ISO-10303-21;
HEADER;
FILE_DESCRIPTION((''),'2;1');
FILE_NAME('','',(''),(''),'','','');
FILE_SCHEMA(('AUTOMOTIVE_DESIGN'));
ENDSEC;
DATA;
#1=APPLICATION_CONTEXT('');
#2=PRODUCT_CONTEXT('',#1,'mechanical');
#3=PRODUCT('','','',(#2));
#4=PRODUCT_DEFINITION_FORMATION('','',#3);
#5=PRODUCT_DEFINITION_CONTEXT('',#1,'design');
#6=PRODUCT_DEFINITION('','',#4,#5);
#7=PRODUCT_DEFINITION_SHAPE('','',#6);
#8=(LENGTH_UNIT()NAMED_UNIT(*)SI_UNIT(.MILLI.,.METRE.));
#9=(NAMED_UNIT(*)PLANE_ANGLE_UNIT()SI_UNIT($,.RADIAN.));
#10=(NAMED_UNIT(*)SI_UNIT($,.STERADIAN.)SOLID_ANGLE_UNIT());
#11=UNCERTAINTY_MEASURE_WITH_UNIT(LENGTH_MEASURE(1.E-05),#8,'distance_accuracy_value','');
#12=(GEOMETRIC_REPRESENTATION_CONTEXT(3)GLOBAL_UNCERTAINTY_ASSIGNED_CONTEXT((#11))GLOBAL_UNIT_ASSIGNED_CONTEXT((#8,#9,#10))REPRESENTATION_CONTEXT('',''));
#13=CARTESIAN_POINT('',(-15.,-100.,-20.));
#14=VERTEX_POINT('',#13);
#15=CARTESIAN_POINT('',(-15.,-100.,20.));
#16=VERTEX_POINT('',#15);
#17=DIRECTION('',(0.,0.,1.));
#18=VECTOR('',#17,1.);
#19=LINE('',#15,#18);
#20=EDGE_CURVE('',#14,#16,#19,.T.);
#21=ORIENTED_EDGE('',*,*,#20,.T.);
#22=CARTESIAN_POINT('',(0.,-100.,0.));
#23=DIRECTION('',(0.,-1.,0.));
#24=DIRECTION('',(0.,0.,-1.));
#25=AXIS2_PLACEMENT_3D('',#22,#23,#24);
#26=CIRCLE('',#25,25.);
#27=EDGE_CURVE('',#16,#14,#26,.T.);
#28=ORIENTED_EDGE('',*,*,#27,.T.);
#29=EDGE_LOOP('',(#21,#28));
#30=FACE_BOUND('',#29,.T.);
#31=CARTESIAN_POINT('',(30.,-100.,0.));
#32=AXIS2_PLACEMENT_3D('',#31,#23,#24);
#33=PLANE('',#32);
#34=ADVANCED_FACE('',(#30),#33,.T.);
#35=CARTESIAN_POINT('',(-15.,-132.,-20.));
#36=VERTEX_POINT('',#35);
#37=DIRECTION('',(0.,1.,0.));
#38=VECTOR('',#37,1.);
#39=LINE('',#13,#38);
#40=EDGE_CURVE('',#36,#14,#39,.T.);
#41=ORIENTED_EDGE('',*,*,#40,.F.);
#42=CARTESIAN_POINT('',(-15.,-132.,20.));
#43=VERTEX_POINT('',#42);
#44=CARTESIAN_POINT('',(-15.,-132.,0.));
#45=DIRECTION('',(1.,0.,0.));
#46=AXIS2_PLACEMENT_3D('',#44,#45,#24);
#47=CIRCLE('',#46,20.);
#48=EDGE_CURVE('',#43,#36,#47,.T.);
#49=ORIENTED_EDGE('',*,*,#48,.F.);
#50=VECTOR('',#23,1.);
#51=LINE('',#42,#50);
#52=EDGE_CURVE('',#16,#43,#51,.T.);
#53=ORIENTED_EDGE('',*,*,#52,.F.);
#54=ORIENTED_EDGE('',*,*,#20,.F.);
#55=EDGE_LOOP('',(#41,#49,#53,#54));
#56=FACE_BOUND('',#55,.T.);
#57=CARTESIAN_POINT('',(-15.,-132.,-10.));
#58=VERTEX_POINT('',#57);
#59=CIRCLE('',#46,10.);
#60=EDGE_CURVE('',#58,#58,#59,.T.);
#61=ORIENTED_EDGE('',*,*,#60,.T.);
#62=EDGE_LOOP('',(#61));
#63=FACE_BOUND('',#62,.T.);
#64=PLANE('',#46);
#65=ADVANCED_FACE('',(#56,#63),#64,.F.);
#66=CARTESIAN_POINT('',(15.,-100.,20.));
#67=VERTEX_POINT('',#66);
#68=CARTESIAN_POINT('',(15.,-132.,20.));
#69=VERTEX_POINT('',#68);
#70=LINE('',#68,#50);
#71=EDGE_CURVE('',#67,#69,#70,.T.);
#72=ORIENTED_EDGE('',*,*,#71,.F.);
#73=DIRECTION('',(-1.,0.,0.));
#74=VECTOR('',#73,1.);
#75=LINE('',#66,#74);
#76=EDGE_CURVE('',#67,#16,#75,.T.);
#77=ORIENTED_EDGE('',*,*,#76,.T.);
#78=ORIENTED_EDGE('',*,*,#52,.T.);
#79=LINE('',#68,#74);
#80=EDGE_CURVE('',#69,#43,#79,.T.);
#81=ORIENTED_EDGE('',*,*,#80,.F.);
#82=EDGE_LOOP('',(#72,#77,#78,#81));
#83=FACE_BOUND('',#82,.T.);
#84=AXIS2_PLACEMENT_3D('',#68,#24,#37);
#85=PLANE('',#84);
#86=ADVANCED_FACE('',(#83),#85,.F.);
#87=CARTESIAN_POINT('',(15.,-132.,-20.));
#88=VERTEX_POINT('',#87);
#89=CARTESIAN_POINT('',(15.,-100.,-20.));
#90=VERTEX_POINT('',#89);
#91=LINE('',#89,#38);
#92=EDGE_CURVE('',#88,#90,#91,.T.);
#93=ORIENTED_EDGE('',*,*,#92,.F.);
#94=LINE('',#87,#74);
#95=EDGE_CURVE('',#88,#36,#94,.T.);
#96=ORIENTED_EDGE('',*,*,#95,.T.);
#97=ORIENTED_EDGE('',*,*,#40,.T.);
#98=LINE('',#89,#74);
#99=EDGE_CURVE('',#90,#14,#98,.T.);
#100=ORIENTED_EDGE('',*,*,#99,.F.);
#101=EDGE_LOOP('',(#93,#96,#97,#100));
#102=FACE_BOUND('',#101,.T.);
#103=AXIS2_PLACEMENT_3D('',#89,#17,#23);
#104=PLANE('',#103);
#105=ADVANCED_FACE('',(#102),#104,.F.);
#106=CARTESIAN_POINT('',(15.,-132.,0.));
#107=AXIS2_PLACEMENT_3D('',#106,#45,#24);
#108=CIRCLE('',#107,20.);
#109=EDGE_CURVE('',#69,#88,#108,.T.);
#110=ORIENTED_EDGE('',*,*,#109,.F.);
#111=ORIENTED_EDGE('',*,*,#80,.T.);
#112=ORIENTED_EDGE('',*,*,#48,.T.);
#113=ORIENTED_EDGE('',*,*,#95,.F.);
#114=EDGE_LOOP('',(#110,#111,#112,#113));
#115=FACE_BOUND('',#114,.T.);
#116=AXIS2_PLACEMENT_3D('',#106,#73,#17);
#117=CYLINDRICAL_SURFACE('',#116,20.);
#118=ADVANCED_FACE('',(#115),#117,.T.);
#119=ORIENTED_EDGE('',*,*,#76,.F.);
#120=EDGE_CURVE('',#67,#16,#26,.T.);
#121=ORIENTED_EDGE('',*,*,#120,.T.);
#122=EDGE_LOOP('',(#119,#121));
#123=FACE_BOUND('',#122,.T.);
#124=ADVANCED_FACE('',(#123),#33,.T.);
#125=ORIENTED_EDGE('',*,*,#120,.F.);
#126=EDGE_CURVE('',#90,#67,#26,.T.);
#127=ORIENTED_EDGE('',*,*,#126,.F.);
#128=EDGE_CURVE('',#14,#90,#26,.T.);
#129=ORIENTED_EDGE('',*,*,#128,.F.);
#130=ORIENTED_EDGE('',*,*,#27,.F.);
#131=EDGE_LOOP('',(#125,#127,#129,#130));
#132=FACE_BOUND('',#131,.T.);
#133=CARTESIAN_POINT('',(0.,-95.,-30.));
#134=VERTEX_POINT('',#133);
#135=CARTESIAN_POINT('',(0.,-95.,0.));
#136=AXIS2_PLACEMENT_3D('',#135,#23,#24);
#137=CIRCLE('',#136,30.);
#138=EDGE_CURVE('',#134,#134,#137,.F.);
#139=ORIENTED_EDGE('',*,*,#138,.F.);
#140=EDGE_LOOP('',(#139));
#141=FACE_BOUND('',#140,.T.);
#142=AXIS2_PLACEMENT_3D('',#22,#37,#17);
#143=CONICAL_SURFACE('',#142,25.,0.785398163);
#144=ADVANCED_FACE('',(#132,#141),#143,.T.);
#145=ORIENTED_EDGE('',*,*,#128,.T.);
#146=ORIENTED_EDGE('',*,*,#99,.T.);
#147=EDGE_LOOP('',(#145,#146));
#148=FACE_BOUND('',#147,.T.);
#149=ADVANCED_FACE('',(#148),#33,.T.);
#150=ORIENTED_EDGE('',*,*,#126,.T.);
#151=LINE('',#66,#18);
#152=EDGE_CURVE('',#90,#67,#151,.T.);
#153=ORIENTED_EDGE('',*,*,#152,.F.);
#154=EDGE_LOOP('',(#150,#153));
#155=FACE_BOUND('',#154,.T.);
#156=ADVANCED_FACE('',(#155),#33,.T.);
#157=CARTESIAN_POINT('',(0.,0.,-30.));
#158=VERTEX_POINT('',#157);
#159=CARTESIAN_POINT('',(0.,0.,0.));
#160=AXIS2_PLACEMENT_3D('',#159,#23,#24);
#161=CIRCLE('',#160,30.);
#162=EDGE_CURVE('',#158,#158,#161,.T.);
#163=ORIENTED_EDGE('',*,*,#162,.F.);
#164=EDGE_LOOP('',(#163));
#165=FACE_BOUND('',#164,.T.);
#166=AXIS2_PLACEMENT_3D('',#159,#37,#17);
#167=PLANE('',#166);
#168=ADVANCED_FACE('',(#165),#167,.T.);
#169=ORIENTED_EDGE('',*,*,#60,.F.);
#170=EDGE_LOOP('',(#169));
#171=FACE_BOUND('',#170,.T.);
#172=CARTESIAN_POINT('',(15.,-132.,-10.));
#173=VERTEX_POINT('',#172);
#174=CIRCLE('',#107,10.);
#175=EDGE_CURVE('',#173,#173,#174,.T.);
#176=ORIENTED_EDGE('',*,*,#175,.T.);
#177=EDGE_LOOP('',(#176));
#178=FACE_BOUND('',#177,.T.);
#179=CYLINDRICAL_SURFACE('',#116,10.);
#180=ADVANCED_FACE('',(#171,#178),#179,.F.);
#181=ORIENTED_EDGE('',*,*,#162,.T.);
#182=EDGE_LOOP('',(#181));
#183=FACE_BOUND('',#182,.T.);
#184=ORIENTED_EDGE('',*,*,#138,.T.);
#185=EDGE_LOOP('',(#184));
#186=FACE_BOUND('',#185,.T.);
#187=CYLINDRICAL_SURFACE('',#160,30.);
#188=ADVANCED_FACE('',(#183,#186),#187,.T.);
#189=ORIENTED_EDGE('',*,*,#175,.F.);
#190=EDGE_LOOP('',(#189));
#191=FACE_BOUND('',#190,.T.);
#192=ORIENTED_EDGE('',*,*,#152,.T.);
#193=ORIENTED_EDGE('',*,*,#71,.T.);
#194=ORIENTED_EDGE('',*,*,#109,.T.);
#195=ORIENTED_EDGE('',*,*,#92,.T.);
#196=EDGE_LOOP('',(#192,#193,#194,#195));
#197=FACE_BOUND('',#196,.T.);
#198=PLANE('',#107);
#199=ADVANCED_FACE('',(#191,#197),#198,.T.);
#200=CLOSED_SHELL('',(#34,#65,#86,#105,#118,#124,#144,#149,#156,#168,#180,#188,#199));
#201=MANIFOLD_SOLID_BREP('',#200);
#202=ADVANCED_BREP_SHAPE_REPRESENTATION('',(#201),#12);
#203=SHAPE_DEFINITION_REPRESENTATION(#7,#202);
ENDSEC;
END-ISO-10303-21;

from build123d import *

# Parameters (mm, degrees)
SKETCH1_W           = 30
SKETCH1_H           = 100
SKETCH2_R           = 10
BOSS_EXTRUDE1_DEPTH = 15
CHAMFER1_SIZE       = 5


with BuildPart() as part:
    # Sketch1 → Revolve1 (revolve)
    with BuildSketch(Plane.XY, mode=Mode.PRIVATE) as revolve1_sk:
        with Locations((15, -50)):
            Rectangle(SKETCH1_W, SKETCH1_H)
    revolve(revolve1_sk.sketch.rotate(Axis((0, 0, 0), (0, 1, 0)), 90), axis=Axis((0, 0, 0), (0, 1, 0)))

    # Sketch2 → Boss-Extrude1 (add, symmetric)
    with BuildSketch(Plane(origin=(0, 0, 0), x_dir=(0, 0, -1), z_dir=(1, 0, 0))):
        with BuildLine():
            Line((-20, -132), (-20, -100))
            Line((-20, -100), (20, -100))
            Line((20, -100), (20, -132))
            ThreePointArc((20, -132), (0, -152), (-20, -132))
        make_face()
        with Locations((0, -132)):
            Circle(SKETCH2_R, mode=Mode.SUBTRACT)
    extrude(amount=BOSS_EXTRUDE1_DEPTH, both=True)

    # Chamfer1
    chamfer1_edges = [part.edges().sort_by_distance(p)[0] for p in [
        (0, -100, 30),
    ]]
    chamfer(chamfer1_edges, length=CHAMFER1_SIZE - 0.0001)  # a hair under: the kernel refuses the full size


solid = part.part
